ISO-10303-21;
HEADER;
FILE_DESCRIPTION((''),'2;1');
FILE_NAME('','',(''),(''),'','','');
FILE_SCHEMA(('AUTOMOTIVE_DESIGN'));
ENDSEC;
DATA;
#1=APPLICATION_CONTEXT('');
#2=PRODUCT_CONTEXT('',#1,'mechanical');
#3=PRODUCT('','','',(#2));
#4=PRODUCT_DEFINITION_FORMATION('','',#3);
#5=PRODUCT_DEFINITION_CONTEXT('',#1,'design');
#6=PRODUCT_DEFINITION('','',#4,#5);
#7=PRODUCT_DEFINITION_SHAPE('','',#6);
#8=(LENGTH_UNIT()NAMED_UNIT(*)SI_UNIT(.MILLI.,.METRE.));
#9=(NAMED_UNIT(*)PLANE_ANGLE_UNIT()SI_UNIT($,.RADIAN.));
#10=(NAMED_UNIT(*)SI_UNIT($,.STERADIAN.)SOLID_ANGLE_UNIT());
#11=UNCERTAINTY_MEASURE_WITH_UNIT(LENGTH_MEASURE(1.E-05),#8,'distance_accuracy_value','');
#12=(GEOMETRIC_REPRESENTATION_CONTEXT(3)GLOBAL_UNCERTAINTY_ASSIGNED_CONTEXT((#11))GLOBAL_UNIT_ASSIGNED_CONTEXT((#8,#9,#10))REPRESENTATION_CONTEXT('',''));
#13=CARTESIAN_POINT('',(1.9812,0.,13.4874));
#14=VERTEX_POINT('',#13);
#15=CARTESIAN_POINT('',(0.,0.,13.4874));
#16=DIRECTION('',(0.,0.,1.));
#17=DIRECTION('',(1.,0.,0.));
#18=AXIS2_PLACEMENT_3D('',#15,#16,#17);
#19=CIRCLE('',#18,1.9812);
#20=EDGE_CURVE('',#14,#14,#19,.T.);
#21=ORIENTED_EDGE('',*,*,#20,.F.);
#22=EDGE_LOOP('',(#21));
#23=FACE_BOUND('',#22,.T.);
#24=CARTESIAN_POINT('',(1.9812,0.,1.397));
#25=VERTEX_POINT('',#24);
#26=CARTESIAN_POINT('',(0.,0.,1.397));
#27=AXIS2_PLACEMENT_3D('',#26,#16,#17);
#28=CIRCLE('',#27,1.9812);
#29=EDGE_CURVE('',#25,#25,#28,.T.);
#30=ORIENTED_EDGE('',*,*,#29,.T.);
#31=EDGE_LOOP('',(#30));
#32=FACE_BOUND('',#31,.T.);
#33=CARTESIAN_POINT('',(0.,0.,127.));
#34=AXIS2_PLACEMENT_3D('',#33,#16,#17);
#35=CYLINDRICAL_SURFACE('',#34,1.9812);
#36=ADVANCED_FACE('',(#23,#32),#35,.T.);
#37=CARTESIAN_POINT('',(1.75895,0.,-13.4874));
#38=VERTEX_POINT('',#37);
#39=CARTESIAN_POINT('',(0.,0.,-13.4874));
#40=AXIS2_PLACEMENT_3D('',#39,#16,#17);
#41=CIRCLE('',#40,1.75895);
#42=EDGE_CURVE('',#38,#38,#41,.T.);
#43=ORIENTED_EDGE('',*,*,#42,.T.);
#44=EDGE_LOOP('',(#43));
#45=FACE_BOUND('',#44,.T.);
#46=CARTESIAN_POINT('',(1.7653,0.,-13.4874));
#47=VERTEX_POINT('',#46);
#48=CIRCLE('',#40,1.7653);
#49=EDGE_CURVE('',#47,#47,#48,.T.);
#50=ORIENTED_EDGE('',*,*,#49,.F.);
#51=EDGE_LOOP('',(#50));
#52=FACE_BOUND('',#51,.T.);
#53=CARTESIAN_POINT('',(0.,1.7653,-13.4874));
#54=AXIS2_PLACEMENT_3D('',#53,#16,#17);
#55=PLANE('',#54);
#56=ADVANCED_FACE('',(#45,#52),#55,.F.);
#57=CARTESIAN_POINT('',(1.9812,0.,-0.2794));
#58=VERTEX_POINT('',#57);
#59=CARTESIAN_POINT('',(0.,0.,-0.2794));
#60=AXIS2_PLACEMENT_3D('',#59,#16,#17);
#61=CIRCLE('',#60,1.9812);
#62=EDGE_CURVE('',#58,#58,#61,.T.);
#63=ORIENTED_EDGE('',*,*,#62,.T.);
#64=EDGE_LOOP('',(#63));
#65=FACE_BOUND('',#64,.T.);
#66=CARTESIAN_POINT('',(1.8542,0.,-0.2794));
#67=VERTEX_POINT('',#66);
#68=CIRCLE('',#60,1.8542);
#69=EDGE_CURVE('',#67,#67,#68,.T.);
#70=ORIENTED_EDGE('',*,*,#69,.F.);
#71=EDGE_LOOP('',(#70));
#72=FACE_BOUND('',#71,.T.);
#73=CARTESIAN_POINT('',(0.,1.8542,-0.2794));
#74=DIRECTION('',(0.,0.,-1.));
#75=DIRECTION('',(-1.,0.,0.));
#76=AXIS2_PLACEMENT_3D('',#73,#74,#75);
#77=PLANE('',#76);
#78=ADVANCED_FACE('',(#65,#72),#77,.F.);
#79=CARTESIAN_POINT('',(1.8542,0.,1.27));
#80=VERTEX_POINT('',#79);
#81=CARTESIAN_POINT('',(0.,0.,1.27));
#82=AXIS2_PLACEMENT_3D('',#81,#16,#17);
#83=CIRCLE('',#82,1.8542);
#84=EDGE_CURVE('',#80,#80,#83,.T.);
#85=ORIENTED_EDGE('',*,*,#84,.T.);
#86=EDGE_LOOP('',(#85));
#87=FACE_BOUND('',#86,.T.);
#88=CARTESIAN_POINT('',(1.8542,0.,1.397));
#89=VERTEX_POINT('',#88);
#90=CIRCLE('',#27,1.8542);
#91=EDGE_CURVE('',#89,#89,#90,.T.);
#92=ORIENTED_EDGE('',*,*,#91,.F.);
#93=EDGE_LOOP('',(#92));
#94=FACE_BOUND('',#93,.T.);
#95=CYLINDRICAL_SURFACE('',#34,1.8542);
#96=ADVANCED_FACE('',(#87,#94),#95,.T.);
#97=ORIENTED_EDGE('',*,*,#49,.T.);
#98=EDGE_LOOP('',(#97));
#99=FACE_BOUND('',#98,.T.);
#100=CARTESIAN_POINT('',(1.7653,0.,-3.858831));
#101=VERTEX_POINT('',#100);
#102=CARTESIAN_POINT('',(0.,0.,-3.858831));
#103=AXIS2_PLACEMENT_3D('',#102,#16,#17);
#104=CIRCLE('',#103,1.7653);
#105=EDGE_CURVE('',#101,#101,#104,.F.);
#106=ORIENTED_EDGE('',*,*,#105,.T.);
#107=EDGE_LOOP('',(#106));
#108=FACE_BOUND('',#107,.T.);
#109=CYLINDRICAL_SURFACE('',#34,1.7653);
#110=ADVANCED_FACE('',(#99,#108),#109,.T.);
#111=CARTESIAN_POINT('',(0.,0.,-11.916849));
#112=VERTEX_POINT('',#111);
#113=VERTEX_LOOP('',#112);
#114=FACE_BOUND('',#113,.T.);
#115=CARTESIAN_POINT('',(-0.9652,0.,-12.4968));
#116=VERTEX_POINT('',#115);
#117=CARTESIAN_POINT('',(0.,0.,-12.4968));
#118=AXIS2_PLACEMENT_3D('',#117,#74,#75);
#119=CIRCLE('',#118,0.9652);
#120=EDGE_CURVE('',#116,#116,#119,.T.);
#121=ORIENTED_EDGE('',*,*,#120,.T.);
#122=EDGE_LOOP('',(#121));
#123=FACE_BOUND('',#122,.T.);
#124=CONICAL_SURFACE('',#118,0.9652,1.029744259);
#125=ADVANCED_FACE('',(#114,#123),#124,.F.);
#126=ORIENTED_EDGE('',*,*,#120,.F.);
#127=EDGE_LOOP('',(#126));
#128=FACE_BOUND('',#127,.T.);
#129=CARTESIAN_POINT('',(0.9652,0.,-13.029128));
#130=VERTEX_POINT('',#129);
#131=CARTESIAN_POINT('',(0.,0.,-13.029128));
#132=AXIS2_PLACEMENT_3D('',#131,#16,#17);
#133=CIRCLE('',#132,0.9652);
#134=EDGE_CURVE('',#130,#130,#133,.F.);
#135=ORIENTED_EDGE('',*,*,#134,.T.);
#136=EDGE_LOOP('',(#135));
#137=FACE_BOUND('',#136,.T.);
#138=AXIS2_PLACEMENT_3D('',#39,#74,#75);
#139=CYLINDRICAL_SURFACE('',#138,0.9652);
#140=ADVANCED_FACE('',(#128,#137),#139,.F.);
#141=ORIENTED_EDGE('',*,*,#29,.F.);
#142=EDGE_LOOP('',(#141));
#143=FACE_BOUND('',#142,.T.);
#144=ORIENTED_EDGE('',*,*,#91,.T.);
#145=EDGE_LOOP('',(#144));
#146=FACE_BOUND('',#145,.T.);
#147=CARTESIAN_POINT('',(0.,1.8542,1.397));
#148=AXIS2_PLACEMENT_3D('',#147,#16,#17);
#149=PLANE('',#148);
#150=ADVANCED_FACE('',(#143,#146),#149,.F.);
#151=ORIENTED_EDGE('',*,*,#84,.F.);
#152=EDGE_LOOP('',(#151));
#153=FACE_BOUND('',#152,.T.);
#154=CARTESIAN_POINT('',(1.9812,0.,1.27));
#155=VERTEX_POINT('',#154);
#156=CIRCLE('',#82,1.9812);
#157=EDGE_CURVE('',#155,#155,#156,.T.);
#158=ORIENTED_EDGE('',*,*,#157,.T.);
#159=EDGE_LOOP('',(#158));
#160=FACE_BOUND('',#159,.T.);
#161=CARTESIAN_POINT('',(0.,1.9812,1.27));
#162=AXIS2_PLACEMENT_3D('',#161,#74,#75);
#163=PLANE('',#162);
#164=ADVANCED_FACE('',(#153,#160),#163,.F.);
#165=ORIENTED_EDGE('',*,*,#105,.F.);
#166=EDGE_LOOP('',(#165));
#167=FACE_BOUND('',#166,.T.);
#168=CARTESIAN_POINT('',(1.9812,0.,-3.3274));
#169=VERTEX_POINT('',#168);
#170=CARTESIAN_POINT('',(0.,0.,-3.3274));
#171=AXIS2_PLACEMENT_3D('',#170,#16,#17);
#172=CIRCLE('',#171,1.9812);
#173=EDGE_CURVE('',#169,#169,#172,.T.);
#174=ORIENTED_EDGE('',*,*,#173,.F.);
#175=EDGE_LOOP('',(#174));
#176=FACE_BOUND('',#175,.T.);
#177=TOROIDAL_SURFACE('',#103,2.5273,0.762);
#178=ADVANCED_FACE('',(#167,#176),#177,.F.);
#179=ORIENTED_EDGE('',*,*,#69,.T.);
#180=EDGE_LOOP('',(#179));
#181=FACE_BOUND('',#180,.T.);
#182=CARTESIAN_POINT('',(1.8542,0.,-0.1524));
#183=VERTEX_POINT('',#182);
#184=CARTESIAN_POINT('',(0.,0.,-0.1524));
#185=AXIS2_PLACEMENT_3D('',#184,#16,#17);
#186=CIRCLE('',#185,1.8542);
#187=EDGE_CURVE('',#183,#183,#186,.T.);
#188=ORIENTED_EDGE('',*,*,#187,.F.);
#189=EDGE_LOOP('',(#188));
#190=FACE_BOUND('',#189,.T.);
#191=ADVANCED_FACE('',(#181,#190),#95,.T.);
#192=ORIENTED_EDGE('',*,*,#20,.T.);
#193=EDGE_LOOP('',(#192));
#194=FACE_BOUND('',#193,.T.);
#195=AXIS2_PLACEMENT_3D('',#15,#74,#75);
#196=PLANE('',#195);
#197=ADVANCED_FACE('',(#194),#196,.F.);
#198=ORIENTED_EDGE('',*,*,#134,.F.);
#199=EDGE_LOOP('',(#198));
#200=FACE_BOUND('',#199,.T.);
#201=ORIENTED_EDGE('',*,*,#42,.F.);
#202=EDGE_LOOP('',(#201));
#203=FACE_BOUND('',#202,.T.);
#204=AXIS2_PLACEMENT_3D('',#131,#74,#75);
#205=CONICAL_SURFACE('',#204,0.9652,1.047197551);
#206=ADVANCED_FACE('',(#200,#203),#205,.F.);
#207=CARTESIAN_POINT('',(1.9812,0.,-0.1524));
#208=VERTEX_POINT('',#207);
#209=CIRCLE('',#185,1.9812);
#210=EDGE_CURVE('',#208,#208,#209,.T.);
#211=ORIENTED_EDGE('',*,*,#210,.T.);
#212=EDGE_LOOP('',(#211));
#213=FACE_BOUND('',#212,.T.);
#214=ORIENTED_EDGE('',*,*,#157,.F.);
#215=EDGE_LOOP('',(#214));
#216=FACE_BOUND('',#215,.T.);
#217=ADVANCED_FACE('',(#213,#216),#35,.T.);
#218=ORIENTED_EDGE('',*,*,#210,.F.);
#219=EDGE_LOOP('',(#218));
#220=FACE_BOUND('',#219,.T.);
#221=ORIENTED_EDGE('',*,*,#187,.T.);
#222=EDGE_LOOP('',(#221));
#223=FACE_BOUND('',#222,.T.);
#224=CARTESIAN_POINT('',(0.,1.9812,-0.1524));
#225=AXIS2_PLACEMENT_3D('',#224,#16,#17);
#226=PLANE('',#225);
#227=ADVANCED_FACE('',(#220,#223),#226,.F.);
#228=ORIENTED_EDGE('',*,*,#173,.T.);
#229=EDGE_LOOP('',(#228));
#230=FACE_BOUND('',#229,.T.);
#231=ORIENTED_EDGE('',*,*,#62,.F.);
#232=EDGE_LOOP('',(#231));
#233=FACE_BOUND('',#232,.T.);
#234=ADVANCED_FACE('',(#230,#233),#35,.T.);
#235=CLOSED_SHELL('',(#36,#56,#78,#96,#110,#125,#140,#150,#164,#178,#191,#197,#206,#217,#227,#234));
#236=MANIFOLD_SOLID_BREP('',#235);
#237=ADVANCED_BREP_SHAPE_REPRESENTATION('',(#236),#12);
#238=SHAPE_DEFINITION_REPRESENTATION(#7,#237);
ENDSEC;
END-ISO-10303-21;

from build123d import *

# Parameters (mm, degrees)
REDONDEO1_R                      = 0.762
TALADRO_DE_MARGEN_PARA_101_D     = 1.9304
TALADRO_DE_MARGEN_PARA_101_DEPTH = 0.9906
TALADRO_DE_MARGEN_PARA_101_TIP   = 0.579950669
CHAFL_N1_SIZE                    = 0.79375
CHAFL_N1_SIZE2                   = 0.458271776


with BuildPart() as part:
    # Croquis1 → Revolución1 (revolve)
    with BuildSketch(Plane(origin=(0, 0, 0), x_dir=(0, 0, -1), z_dir=(1, 0, 0)), mode=Mode.PRIVATE) as revoluci_n1_sk:
        Polygon((-13.4874, 0), (-13.4874, 1.9812), (-1.397, 1.9812), (-1.397, 1.8542), (-1.27, 1.8542), (-1.27, 1.9812), (0.1524, 1.9812), (0.1524, 1.8542), (0.2794, 1.8542), (0.2794, 1.9812), (3.3274, 1.9812), (3.3274, 1.7653), (13.4874, 1.7653), (13.4874, 0), align=None)
    revolve(revoluci_n1_sk.sketch.rotate(Axis((0, 0, 127), (0, 0, -1)), 90), axis=Axis((0, 0, 127), (0, 0, -1)))

    # Redondeo1
    # the kernel refuses this fillet: 0.762 mm, written as the material it adds along each edge
    with BuildSketch(Plane(origin=(0, 0, -3.3274), x_dir=(1, 0, 0), z_dir=(0, 1, 0))) as redondeo1_piece_1:
        with BuildLine():
            CenterArc((2.5273, 0.531430889), REDONDEO1_R, 180, 44.220044428)
            Line((1.7653, 0.531430889), (1.75006, 0.531430889))
            Line((1.75006, 0.531430889), (1.75006, 0))
            Line((1.75006, 0), (1.7653, -0.01524))
            ThreePointArc((1.7653, -0.01524), (1.87325, -0.01524), (1.970278, -0.010628618))
            Line((1.970278, -0.010628618), (1.9812, 0))
        make_face()
    revolve(axis=Axis((0, 0, -3.3274), (0, 0, -1)))

    # Taladro de margen para #101
    with Locations(Plane(origin=(0, 0, -13.4874), x_dir=(-1, 0, 0), z_dir=(0, 0, -1))):
        with Locations((0, 0)):
            Hole(TALADRO_DE_MARGEN_PARA_101_D / 2, depth=TALADRO_DE_MARGEN_PARA_101_DEPTH)
            with Locations((0, 0, -(TALADRO_DE_MARGEN_PARA_101_DEPTH + TALADRO_DE_MARGEN_PARA_101_TIP / 2))):  # 118° drill point
                Cone(0, TALADRO_DE_MARGEN_PARA_101_D / 2, TALADRO_DE_MARGEN_PARA_101_TIP, mode=Mode.SUBTRACT)

    # Chaflán1
    chafl_n1_edges = [part.edges().sort_by_distance(p)[0] for p in [
        (-0.9652, 0, -13.4874),
    ]]
    chafl_n1_side = [part.faces().sort_by_distance(p)[0] for p in [
        (-1.715369776, 0, -13.4874),
    ]]
    chamfer(chafl_n1_edges, length=CHAFL_N1_SIZE, length2=CHAFL_N1_SIZE2, reference=chafl_n1_side[0])


solid = part.part
